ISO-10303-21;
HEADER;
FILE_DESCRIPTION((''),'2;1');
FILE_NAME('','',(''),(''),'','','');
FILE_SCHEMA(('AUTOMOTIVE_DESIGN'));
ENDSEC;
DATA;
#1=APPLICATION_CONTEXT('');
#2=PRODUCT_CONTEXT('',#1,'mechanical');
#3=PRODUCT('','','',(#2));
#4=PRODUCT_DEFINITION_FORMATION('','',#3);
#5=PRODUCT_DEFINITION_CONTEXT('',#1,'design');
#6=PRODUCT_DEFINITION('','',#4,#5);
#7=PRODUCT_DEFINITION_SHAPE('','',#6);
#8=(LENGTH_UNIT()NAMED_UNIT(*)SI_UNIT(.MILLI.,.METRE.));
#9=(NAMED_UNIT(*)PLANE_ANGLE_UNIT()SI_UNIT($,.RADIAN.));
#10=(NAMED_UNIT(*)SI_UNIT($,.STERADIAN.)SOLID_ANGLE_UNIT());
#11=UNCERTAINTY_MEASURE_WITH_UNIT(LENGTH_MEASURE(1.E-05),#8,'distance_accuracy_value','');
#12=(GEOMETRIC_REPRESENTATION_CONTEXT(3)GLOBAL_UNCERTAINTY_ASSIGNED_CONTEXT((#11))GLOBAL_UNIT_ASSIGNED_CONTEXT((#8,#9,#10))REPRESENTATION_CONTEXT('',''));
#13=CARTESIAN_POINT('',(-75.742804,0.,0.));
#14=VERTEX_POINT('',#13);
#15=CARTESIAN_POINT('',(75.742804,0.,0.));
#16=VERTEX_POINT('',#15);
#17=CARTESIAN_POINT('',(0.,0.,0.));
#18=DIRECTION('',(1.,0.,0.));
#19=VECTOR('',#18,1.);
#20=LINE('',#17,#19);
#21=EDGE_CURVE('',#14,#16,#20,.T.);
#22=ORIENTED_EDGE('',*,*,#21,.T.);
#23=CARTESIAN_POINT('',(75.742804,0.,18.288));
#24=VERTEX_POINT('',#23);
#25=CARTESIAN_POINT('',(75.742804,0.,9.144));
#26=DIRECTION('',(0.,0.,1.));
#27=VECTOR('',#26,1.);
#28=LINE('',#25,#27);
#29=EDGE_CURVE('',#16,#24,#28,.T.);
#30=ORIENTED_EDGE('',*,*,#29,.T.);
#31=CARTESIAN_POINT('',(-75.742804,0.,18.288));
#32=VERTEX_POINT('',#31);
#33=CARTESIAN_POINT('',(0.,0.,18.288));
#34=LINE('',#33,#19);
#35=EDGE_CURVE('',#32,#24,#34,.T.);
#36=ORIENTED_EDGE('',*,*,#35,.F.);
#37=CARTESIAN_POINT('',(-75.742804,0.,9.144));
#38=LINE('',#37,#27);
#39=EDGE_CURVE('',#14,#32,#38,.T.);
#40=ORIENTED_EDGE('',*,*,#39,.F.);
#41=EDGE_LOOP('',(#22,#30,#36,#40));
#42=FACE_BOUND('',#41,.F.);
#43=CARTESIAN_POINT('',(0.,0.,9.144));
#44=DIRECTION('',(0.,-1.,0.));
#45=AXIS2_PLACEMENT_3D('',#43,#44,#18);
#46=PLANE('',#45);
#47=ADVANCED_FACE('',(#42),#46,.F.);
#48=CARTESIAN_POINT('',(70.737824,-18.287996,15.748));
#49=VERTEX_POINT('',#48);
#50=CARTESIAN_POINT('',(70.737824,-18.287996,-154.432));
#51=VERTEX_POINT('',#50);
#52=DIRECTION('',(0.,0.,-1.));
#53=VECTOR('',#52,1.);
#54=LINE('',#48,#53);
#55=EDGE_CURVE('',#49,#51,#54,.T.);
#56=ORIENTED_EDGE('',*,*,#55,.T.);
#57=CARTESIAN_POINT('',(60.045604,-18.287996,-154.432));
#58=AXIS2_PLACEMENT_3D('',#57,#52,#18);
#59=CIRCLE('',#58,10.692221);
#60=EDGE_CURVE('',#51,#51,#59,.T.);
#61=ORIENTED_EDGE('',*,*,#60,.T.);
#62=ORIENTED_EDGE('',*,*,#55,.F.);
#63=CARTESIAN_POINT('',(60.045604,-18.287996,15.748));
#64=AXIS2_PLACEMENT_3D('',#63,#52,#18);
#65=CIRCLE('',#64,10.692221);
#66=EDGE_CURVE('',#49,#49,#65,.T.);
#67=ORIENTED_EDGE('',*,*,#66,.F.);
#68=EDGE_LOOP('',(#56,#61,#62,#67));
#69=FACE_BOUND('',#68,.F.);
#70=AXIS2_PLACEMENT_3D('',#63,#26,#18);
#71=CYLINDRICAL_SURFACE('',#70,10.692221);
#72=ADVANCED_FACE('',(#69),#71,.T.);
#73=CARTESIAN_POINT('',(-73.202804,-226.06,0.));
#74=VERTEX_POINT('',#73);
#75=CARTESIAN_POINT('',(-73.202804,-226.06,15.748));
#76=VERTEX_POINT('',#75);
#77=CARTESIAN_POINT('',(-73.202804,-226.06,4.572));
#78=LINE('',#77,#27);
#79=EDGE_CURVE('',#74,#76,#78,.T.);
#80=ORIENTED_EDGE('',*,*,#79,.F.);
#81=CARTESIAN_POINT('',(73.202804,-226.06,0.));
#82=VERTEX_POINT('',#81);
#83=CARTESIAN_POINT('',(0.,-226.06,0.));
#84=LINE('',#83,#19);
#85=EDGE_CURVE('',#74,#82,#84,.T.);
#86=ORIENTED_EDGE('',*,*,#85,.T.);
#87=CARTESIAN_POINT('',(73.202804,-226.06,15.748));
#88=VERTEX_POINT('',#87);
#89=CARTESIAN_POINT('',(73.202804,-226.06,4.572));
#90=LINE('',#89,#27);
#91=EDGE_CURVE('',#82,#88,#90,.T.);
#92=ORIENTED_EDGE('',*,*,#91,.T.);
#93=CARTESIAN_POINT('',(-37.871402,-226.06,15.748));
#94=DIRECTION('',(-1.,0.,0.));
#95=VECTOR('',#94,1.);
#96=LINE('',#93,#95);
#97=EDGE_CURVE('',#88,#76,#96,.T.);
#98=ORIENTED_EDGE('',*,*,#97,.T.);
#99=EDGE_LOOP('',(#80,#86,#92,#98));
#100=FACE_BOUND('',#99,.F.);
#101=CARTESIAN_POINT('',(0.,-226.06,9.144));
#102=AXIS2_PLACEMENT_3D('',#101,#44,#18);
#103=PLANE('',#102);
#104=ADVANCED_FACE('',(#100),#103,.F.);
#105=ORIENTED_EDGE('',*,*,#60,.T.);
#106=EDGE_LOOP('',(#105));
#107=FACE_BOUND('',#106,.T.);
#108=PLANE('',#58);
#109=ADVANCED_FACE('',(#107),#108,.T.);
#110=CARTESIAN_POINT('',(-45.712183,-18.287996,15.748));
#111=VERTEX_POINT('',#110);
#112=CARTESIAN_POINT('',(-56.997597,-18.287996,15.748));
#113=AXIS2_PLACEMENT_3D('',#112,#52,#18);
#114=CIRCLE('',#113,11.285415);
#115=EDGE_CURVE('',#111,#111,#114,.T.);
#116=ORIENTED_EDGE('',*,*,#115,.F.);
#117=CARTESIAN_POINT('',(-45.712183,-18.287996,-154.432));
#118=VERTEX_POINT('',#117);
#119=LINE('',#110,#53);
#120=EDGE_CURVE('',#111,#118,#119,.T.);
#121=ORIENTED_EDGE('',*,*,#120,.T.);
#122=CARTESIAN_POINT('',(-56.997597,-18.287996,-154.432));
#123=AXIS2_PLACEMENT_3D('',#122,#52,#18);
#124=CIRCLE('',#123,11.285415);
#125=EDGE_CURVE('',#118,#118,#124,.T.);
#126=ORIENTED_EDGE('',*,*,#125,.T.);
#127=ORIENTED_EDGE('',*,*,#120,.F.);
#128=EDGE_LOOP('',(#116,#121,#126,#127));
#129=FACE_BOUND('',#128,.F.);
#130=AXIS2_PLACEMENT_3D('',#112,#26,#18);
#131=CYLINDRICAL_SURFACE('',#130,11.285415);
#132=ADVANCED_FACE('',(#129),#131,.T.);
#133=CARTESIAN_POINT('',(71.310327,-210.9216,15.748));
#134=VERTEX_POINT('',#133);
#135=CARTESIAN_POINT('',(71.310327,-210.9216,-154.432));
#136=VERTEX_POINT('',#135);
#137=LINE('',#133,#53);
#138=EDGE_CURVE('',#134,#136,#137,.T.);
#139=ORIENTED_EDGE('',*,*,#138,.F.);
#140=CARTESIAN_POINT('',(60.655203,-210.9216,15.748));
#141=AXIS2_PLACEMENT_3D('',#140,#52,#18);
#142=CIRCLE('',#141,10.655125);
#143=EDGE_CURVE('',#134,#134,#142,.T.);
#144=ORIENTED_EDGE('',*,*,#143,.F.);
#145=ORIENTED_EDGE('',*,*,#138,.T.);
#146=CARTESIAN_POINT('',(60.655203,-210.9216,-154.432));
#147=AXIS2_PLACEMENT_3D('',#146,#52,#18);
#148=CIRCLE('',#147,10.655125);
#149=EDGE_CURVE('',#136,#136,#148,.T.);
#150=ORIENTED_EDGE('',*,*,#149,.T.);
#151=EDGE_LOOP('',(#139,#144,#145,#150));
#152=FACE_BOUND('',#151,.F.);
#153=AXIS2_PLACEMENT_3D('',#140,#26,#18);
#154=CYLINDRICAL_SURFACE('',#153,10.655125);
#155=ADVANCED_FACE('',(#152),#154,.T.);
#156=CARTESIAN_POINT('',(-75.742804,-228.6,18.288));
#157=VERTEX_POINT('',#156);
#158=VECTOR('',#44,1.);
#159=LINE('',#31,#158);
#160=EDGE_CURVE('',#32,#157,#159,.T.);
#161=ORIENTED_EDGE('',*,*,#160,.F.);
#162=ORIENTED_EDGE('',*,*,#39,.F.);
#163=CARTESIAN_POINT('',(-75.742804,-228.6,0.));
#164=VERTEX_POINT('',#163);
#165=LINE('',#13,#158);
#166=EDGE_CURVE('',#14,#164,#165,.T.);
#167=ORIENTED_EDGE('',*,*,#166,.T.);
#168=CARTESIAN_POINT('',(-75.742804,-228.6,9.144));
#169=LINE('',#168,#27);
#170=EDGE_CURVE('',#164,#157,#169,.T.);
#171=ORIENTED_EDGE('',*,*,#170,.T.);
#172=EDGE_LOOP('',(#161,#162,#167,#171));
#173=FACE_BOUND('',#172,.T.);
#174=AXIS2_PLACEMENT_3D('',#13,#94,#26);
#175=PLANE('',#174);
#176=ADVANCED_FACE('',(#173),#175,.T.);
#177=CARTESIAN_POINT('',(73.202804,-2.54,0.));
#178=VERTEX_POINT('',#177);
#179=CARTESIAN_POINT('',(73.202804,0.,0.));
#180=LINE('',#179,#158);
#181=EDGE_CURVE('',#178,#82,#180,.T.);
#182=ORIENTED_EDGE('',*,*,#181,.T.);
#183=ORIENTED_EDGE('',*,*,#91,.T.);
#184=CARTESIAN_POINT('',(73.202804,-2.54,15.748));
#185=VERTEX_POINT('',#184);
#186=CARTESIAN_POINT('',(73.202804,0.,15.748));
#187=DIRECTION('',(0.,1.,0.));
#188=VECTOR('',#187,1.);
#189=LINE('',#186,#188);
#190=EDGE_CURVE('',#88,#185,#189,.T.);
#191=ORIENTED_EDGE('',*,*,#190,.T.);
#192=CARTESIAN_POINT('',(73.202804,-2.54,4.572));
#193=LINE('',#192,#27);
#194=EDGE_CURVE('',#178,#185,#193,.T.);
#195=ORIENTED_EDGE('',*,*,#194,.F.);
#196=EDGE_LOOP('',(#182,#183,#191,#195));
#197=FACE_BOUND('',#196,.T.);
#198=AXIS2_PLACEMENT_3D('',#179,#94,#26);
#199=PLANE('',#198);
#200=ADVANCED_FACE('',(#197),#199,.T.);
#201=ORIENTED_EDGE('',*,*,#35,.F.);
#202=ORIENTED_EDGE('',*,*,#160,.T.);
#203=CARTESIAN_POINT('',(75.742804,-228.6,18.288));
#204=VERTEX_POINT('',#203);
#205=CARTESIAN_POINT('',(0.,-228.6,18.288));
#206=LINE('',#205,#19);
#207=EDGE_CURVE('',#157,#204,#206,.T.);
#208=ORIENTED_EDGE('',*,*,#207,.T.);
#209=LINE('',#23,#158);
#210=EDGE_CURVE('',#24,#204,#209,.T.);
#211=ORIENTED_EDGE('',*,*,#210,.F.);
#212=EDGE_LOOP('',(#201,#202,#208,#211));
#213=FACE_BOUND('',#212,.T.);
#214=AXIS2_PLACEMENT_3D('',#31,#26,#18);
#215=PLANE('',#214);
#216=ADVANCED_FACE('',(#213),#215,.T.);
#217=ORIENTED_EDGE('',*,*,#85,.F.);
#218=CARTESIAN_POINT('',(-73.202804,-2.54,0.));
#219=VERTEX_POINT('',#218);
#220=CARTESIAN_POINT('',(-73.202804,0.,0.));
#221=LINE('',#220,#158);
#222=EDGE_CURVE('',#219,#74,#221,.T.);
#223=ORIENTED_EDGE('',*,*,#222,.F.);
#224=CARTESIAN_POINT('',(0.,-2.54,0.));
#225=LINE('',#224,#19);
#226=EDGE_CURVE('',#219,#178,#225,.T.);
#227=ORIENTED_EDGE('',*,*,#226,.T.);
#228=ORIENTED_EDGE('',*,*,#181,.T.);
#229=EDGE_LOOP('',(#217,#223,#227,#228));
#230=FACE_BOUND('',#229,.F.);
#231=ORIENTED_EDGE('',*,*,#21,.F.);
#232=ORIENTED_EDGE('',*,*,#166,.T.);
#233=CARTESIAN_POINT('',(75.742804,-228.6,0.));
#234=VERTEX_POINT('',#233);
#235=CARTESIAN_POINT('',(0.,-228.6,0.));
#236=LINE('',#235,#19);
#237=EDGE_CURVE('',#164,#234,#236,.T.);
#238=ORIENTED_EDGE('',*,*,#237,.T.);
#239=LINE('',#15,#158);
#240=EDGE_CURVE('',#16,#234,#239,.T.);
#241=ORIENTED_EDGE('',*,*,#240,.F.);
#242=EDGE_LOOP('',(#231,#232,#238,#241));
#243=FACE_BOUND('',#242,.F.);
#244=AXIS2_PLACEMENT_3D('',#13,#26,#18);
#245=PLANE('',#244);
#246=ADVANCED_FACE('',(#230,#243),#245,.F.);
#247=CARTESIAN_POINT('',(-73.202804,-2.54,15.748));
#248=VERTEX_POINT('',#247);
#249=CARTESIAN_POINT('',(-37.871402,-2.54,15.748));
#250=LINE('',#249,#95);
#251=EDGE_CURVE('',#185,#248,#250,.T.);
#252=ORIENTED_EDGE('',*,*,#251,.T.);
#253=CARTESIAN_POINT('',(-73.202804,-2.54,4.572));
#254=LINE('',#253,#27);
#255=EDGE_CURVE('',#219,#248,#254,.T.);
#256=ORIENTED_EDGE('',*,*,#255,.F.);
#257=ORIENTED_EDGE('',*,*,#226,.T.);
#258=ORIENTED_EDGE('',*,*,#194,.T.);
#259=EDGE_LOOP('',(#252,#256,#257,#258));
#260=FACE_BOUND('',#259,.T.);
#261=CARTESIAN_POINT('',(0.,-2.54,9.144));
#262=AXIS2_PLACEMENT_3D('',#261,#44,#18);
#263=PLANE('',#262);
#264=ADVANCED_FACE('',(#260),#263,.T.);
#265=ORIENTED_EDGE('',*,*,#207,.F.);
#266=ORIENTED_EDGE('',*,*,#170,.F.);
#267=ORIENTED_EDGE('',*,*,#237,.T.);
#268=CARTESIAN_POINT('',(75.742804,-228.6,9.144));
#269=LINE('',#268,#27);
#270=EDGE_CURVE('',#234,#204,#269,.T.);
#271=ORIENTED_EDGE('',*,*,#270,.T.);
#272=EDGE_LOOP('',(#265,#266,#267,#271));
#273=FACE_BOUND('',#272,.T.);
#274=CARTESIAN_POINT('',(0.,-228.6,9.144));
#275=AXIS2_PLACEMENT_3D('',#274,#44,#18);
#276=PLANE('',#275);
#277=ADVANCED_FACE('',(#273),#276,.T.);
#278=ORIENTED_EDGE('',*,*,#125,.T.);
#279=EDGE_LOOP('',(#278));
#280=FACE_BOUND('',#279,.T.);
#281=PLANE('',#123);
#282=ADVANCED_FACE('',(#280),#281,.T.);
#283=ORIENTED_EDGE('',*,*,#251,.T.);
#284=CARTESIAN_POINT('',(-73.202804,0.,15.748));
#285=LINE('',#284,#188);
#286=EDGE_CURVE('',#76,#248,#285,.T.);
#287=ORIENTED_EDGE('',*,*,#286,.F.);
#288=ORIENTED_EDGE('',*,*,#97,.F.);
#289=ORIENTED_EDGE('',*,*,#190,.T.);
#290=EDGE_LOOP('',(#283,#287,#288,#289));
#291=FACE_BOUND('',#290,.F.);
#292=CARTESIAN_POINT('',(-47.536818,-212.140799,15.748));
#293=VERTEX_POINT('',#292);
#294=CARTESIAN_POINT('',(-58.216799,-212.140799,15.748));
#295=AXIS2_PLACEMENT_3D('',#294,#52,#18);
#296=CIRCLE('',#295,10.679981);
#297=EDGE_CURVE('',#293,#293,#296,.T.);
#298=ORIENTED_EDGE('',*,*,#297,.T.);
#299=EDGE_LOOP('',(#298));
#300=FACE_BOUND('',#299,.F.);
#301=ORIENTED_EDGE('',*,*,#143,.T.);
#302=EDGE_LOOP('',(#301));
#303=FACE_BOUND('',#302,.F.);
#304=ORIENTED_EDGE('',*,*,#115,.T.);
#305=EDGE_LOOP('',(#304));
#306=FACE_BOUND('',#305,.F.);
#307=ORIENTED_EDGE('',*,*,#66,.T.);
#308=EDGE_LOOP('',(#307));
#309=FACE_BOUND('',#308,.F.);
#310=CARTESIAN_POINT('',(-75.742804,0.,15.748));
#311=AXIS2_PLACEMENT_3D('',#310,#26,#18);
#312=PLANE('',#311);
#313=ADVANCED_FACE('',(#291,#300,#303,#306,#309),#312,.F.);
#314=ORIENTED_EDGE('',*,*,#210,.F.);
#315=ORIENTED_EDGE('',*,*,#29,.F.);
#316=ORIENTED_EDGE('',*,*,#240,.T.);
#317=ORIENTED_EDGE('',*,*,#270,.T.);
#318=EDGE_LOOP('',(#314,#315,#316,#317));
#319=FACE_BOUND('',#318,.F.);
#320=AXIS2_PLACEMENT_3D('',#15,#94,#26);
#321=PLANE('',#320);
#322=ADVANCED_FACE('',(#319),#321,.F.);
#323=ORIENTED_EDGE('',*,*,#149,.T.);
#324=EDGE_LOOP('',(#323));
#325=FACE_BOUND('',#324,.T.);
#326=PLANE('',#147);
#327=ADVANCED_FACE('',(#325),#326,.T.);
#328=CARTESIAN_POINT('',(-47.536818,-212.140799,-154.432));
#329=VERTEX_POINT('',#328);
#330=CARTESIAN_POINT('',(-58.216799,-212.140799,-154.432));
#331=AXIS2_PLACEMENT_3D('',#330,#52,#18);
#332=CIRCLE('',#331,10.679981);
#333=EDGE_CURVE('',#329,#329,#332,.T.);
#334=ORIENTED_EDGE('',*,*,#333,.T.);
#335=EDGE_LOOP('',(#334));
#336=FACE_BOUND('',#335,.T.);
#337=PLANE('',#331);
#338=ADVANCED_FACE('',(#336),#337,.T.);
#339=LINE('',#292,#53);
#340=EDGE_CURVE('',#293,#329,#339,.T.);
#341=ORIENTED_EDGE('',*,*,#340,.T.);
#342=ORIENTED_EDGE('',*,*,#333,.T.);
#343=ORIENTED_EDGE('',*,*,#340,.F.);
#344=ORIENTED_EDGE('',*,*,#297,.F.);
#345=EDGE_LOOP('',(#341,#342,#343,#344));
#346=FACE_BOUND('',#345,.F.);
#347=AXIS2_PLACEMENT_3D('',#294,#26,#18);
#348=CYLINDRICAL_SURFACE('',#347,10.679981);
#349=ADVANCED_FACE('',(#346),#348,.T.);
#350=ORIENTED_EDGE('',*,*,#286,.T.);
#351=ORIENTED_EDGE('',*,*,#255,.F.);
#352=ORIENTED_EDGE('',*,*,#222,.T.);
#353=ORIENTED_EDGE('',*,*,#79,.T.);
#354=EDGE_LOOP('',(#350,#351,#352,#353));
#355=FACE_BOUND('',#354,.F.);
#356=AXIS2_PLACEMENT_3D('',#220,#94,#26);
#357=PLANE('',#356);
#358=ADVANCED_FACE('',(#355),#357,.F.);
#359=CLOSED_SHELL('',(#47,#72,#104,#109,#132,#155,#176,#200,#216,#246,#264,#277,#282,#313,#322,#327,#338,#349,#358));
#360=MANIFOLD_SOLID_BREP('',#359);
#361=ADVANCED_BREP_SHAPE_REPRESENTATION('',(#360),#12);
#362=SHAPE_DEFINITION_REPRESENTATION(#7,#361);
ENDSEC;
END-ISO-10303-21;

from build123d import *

# Parameters (mm, degrees)
F0_W     = 151.485607028
F0_H     = 18.2879995555
F1_DEPTH = 228.6
F2_T     = -2.54
F3_R     = 10.6799813772
F3_R_2   = 11.2854145599
F3_R_3   = 10.6922207588
F3_R_4   = 10.6551247764
F8_DEPTH = 170.18


# Not quite as in the source:
# - the program builds the solid bodies; features that only make, move or delete a surface that nothing else refers to are left out


with BuildPart() as f1:
    # F0 (on Front) → F1 (new body)
    with BuildSketch(Plane.XZ):
        with Locations((0, 9.1439997777)):
            Rectangle(F0_W, F0_H)
    extrude(amount=F1_DEPTH)

    # F2
    f2_openings = [f1.faces().sort_by_distance(p)[0] for p in [
        (0, -114.3, 0),
    ]]
    offset(amount=F2_T, openings=f2_openings)

    # F3 (on face) → F8 (join)
    with BuildSketch(Plane(origin=(0, 0, 15.7479995555), x_dir=(1, 0, 0), z_dir=(0, 0, -1))):
        with Locations((-58.2167990506, 212.1407985687)):
            Circle(F3_R)
        with Locations((-56.9975972176, 18.2879958302)):
            Circle(F3_R_2)
        with Locations((60.0456036627, 18.2879958302)):
            Circle(F3_R_3)
        with Locations((60.6552027166, 210.921600461)):
            Circle(F3_R_4)
    extrude(amount=F8_DEPTH)


solid = f1.part
